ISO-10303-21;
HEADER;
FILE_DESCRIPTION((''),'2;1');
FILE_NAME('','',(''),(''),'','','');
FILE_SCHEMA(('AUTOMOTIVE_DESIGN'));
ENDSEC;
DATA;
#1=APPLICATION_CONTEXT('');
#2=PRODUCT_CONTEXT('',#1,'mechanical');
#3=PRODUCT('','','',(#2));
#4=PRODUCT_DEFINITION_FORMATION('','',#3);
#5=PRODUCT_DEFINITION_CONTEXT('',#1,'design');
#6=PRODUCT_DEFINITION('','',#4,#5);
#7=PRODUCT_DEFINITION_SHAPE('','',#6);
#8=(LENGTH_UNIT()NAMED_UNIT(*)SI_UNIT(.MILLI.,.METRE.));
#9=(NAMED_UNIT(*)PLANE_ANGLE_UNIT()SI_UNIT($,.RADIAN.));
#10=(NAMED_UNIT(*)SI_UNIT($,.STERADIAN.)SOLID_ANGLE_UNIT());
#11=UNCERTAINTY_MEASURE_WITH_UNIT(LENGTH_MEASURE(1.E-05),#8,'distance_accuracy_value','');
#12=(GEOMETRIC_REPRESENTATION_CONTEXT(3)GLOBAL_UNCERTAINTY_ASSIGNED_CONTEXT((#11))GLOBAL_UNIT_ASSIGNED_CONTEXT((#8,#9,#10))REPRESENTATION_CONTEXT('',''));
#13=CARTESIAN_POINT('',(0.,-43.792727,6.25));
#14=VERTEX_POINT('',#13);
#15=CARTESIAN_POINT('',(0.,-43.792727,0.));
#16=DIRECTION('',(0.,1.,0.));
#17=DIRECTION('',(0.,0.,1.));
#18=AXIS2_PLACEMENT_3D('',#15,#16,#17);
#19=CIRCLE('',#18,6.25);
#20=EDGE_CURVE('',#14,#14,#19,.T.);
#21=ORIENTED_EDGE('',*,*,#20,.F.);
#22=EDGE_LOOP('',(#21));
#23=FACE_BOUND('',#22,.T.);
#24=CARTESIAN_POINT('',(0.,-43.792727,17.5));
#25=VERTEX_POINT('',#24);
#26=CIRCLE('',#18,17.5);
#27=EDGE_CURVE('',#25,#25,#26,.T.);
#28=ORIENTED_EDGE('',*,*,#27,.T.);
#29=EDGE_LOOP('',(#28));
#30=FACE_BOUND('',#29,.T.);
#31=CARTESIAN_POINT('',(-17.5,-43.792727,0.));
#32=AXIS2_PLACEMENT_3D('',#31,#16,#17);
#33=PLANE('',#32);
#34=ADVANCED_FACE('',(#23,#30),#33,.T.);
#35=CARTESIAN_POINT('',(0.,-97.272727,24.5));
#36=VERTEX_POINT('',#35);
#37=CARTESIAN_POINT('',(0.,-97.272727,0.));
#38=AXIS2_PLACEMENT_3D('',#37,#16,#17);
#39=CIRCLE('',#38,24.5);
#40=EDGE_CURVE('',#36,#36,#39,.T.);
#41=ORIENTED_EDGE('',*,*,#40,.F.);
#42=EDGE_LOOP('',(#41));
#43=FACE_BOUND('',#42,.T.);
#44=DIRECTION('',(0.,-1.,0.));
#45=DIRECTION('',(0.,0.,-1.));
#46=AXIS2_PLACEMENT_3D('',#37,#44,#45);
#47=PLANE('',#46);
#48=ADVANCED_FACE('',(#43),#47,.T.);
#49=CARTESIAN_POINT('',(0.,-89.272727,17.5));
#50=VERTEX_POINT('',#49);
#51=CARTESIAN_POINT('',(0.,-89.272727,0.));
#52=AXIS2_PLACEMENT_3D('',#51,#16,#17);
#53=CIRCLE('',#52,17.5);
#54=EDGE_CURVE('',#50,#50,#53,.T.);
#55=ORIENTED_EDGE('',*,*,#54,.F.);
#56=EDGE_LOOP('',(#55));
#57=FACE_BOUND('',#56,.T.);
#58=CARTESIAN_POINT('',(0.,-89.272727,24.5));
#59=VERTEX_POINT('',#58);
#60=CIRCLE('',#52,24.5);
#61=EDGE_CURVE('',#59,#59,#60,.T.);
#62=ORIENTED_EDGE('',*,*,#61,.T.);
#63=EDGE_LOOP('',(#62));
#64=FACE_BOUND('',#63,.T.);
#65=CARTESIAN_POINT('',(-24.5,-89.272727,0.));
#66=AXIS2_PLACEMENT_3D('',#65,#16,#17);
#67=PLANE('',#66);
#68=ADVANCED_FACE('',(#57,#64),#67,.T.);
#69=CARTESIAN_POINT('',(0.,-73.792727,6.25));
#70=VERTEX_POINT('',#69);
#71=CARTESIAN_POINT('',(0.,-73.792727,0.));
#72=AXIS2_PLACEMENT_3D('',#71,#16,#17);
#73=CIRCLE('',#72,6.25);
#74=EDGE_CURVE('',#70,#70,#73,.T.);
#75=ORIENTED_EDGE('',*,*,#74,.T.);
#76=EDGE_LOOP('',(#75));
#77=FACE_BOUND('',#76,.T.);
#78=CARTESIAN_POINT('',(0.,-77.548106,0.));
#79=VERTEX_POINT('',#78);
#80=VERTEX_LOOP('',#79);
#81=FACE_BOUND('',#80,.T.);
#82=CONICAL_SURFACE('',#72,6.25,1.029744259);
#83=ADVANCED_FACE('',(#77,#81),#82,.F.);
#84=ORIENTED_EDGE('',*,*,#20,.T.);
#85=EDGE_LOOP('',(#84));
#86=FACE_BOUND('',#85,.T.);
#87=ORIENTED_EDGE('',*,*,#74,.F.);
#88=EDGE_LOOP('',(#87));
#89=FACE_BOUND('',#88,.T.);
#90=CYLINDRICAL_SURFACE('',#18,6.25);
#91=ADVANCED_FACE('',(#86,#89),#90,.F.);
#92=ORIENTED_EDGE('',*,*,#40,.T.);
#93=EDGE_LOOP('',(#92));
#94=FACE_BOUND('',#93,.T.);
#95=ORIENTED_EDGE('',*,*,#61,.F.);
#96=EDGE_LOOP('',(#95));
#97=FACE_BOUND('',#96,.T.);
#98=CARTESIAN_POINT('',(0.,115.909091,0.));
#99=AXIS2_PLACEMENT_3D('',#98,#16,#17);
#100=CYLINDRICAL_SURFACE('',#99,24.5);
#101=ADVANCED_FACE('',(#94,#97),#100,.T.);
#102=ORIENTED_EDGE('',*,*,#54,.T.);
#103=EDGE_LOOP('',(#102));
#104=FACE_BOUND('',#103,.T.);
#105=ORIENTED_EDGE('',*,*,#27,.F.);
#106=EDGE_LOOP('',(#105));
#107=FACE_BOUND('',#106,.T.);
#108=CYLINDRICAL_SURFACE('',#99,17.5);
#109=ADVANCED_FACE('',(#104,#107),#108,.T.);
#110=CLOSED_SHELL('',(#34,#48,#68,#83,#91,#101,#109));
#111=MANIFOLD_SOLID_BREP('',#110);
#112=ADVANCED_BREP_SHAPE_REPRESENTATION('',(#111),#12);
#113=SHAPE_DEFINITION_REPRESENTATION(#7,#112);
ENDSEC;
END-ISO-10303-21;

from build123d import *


# Read off the part's stored shape, not the designer's step: PerçageAvancé1
with BuildPart() as part:
    # Esquisse1 → Révolution1 (revolve)
    with BuildSketch(Plane.XY, mode=Mode.PRIVATE) as r_volution1_sk:
        Polygon((0, -43.792727273), (0, -97.272727273), (-24.5, -97.272727273), (-24.5, -89.272727273), (-17.5, -89.272727273), (-17.5, -43.792727273), align=None)
    revolve(r_volution1_sk.sketch.rotate(Axis((0, 115.909090909, 0), (0, -1, 0)), 270), axis=Axis((0, 115.909090909, 0), (0, -1, 0)))

    # PerçageAvancé1 outline → PerçageAvancé1 (revolve, cut)
    with BuildSketch(Plane.XY):
        Polygon((0, -77.548106142), (6.25, -73.792727273), (6.25, -43.792727273), (0, -43.792727273), align=None)
    revolve(axis=Axis((0, 0, 0), (0, 1, 0)), mode=Mode.SUBTRACT)


solid = part.part
